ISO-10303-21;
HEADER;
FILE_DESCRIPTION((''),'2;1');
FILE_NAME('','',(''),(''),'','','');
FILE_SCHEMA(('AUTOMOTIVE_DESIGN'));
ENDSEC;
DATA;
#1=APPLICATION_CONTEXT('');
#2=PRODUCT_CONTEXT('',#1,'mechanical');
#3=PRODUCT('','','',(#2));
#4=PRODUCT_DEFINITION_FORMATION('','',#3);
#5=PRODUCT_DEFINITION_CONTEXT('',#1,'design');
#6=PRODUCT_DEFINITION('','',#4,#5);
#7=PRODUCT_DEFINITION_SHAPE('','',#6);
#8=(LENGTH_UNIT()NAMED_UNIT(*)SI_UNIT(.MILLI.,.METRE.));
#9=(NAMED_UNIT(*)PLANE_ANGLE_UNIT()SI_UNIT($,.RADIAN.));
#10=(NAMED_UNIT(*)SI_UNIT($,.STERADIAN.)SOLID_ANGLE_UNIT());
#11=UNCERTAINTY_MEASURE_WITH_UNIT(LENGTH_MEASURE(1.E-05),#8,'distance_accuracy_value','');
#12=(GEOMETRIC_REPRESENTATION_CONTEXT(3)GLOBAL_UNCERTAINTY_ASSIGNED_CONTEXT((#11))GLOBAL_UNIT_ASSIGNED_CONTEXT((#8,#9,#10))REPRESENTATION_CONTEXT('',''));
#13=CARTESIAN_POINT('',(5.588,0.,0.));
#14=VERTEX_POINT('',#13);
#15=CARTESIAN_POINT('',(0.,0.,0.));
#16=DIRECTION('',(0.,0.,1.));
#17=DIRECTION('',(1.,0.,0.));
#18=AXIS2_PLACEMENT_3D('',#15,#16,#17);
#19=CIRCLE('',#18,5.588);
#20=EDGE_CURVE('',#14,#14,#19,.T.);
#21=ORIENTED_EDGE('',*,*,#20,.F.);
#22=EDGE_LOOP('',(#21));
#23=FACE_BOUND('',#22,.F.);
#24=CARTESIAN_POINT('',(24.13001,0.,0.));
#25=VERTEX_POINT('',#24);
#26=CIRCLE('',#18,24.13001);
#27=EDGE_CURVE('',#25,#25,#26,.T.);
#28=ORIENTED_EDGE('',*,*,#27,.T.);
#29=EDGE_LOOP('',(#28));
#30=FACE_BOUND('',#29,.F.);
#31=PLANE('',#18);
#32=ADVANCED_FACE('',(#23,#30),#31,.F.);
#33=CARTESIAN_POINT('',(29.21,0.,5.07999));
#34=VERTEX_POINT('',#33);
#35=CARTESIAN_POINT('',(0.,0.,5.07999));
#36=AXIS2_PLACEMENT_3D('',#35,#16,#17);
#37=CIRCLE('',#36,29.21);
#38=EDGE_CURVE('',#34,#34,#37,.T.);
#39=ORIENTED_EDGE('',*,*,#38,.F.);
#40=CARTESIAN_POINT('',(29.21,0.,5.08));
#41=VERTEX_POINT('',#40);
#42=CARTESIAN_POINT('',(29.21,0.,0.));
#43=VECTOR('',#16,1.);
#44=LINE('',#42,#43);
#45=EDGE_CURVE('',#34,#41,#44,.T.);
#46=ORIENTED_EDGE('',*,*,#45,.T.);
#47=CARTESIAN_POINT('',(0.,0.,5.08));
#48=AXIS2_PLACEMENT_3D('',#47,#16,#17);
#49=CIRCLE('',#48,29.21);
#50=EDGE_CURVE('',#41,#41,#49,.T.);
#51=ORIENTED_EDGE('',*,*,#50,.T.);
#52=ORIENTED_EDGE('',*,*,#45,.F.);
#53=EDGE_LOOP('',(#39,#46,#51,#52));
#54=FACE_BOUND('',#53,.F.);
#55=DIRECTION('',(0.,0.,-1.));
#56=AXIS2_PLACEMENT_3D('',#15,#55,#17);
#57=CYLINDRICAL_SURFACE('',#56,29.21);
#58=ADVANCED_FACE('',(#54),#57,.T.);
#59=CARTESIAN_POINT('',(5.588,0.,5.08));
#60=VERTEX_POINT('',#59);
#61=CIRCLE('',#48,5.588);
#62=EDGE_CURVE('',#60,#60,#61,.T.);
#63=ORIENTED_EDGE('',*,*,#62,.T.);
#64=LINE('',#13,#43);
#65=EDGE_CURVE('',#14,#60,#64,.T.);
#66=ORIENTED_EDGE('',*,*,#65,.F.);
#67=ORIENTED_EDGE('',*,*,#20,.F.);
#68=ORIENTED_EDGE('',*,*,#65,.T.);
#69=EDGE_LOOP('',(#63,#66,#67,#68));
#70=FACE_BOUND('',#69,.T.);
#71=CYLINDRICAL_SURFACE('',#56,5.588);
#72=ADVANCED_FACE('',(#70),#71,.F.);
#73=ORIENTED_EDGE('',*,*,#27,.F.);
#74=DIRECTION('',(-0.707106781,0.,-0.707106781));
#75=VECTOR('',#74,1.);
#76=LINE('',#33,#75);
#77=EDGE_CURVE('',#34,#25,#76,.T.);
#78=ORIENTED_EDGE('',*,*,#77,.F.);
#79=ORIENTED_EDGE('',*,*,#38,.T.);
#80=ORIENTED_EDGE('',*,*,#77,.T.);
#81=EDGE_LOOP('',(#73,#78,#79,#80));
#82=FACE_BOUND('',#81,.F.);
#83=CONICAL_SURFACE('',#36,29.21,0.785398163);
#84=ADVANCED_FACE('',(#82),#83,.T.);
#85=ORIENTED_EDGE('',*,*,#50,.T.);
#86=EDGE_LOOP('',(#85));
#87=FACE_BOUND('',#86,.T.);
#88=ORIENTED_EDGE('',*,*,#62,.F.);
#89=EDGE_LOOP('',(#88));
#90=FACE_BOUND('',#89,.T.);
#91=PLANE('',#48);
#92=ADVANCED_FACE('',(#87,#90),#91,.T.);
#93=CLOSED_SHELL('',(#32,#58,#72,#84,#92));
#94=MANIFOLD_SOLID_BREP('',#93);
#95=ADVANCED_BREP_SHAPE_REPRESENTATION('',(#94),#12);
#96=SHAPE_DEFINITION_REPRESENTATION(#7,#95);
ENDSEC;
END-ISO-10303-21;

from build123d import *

# Parameters (mm, degrees)
F0_R     = 29.21
F0_R_2   = 5.588
F1_DEPTH = 5.08
F2_SIZE  = 5.07999


# Not quite as in the source:
# - a fillet or chamfer is up to 0.001 mm smaller than in the source, because OpenCascade refuses the exact size


with BuildPart() as f1:
    # F0 (on Top) → F1 (new body)
    with BuildSketch(Plane.XY):
        Circle(F0_R)
        Circle(F0_R_2, mode=Mode.SUBTRACT)
    extrude(amount=F1_DEPTH)

    # F2 (size 5.08 in the source; OpenCascade refuses exactly that, so slightly less here)
    f2_edges = [f1.edges().sort_by_distance(p)[0] for p in [
        (-29.21, 0, 0),
    ]]
    chamfer(f2_edges, length=F2_SIZE)


solid = f1.part
